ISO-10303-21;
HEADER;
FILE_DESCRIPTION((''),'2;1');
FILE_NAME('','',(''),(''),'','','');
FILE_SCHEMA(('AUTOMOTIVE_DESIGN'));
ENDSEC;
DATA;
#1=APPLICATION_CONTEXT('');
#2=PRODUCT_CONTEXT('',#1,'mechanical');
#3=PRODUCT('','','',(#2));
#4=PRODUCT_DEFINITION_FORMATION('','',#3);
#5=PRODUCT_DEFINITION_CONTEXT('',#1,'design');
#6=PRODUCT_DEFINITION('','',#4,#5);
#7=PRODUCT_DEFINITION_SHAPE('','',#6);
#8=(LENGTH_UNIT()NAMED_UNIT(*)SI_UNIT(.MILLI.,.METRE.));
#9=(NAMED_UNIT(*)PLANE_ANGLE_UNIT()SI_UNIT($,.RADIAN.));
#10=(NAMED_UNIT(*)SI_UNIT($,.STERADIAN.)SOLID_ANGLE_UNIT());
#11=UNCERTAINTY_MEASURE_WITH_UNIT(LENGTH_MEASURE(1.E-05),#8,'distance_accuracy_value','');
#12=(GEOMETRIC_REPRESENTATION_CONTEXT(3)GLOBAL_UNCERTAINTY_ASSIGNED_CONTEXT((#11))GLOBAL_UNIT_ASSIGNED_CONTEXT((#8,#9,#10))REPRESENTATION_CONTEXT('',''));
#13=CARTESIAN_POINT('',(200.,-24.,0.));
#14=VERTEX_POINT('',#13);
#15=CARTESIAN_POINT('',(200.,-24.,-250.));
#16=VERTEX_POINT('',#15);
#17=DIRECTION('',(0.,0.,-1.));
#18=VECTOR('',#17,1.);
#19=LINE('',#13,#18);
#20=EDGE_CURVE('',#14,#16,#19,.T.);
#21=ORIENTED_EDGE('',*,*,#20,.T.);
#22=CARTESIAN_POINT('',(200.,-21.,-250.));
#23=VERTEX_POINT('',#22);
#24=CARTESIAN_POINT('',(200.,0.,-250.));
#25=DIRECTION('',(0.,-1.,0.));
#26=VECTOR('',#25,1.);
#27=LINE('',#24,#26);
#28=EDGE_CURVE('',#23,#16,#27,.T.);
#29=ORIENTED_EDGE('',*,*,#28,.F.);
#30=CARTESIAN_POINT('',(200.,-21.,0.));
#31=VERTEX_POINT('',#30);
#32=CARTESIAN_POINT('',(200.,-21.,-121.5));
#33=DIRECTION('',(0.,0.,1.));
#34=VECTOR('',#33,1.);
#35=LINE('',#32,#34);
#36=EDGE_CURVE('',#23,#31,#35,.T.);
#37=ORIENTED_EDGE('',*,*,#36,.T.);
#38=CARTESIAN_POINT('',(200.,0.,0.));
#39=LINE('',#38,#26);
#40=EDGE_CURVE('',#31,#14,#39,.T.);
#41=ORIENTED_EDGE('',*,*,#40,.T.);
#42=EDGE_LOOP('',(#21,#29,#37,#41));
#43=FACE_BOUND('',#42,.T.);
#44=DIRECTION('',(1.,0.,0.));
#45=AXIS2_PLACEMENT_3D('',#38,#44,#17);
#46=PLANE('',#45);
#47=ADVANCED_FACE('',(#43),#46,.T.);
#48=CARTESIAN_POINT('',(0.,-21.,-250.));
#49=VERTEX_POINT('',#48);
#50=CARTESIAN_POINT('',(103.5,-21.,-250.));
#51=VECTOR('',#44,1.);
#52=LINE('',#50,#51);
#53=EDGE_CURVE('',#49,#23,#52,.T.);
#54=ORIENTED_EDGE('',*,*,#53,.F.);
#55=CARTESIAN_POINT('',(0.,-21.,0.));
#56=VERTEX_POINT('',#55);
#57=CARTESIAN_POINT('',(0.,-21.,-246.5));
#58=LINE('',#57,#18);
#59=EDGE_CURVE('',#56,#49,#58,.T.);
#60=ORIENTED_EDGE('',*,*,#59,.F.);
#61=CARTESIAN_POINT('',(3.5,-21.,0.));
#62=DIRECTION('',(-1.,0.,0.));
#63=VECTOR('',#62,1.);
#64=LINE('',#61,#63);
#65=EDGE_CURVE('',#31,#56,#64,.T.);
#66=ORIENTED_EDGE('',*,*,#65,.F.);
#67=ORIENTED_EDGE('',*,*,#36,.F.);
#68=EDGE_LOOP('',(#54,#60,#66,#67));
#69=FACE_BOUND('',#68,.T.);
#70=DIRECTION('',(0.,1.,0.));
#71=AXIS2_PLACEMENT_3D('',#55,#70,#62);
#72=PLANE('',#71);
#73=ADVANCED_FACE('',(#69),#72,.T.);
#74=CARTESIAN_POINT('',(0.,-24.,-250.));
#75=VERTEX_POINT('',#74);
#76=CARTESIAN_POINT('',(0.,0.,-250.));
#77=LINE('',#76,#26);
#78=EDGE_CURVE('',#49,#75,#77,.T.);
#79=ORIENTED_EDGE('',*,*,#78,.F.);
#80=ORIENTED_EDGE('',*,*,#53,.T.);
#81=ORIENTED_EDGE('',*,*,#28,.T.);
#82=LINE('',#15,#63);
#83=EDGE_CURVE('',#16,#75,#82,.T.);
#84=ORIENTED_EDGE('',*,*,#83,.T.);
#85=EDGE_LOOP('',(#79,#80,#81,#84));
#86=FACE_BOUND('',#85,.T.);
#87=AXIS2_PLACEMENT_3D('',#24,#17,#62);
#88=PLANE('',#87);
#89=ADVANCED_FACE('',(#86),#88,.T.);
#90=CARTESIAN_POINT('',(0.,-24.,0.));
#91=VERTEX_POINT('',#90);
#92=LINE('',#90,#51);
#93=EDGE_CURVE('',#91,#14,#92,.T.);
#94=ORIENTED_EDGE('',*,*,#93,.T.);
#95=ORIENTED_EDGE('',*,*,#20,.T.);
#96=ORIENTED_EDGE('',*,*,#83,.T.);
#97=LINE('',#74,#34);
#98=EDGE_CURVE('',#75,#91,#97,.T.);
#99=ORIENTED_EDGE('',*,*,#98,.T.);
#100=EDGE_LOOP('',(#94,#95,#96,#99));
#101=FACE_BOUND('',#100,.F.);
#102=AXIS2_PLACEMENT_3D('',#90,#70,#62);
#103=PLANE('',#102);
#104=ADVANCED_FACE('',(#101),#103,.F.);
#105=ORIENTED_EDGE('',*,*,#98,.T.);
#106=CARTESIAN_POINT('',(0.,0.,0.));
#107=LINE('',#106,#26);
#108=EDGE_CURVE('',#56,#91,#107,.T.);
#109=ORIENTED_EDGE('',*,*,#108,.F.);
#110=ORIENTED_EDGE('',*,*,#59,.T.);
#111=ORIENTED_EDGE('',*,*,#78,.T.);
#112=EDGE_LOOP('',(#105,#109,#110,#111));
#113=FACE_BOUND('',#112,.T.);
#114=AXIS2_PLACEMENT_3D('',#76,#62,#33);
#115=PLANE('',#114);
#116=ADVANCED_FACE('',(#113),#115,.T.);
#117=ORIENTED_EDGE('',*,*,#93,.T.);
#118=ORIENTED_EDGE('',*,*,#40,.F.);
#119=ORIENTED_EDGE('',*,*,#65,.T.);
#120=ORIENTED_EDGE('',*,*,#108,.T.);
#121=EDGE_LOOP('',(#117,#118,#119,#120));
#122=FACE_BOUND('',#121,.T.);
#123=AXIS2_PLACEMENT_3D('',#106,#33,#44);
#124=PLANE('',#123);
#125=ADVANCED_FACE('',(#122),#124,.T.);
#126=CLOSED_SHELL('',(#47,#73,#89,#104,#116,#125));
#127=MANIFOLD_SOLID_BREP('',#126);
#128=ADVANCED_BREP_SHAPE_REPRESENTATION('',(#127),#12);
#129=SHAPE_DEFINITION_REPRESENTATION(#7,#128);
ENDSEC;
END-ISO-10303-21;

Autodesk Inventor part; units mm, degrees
ref_plane "YZ Plane" through (0, 0, 0) normal (1, 0, 0) x (0, 1, 0)
ref_plane "XZ Plane" through (0, 0, 0) normal (0, 1, 0) x (-1, 0, 0)
ref_plane "XY Plane" through (0, 0, 0) normal (0, 0, 1) x (1, 0, 0)
sketch "block" plane through (0, 0, 0) normal (0, 1, 0) x (-1, 0, 0)
  line L0 (0, 0) -> (-200, 0)
  line L1 (-200, 0) -> (-200, -250)
  line L2 (-200, -250) -> (0, -250)
  line L3 (0, -250) -> (0, 0)
  dimension "d31" = 200
  dimension "d32" = 250
extrude "ext_block" add sketch "block" against normal blind 24
shell "Shell2" thickness 3 removed faces 0
sketch "lines_base" plane through (0, 0, 0) normal (0, 1, 0) x (-1, 0, 0)
  line L0 (0, 0) -> (-200, 0)
  line L1 (-200, 0) -> (-200, -250)
  line L2 (-200, -250) -> (0, -250)
  line L3 (0, -250) -> (0, 0)
  circle A0 centre (-65, -60) radius 6
  circle A1 centre (-125, -80) radius 6
  circle A2 centre (-65, -60) radius 12.5
  circle A3 centre (-65, -60) radius 8.5
  circle A4 centre (-125, -80) radius 8.5
  circle A5 centre (-125, -80) radius 12.5
  circle A6 centre (-175, -125) radius 3
  line L4 (-175, -125) -> (-175, -209)
  line L5 (-175, -125) -> (-91, -125) construction
  circle A7 centre (-175, -139) radius 3
  circle A8 centre (-175, -153) radius 3
  circle A9 centre (-175, -167) radius 3
  circle A10 centre (-175, -181) radius 3
  circle A11 centre (-175, -195) radius 3
  circle A12 centre (-175, -209) radius 3
  circle A13 centre (-95, -185) radius 2.5
  circle A14 centre (-95, -185) radius 5
  point P0 (-200, -125)
  dimension "d0" = 200
  dimension "d1" = 250
  dimension "d2" = 12
  dimension "d3" = 12
  dimension "d4" = 25
  dimension "d5" = 17
  dimension "d6" = 17
  dimension "d7" = 25
  dimension "d8" = 75
  dimension "d9" = 80
  dimension "d10" = 65
  dimension "d11" = 60
  dimension "d12" = 6
  dimension "d13" = 84
  dimension "d14" = 90
  dimension "d15" = 25
  dimension "d16" = 125
  dimension "d19" = 14
  dimension "d24" = 5
  dimension "d25" = 10
  dimension "d26" = 65
  dimension "d27" = 95
extrude "holes" cut sketch "lines_base" against normal up to surface (3 mm away) contours A0 | A1 | A6 | A7 L4 | L4 A7 | A8 L4 | L4 A8 | A9 L4 | L4 A9 | A10 L4 | L4 A10 | A11 L4 | L4 A11 | A12 | A13
sketch "Sketch4" plane through (200, 0, -250) normal (0, 0, -1) x (-1, 0, 0)
  line L0 (188, -4) -> (169, -4)
  line L1 (169, -4) -> (169, -17)
  line L2 (169, -17) -> (188, -17)
  line L3 (188, -17) -> (188, -4)
  line L4 (0, 0) -> (200, 0) projected
  line L5 (200, 0) -> (200, -24) projected
  dimension "d40" = 19
  dimension "d41" = 13
  dimension "d42" = 4
  dimension "d43" = 12
extrude "pwr_button_hole" cut sketch "Sketch4" against normal up to surface (3 mm away)
chamfer "back_cover_support" distance 4 angle 45 4 edges at (100, -21, -3) (3, -21, -125) (197, -21, -125) (100, -21, -247)
sketch "Sketch5" plane through (7, -21, -243) normal (0, 1, 0) x (1, 0, 0)
  line L0 (-20.9366, 21.7948) -> (229.9216, 21.7948)
  line L1 (229.9216, 21.7948) -> (229.9216, -260.9184)
  line L2 (229.9216, -260.9184) -> (-20.9366, -260.9184)
  line L3 (-20.9366, -260.9184) -> (-20.9366, 21.7948)
  point P0 (-7, -243)
extrude "back_cover_cut" cut sketch "Sketch5" along normal through all
properties part number "back_cover"
